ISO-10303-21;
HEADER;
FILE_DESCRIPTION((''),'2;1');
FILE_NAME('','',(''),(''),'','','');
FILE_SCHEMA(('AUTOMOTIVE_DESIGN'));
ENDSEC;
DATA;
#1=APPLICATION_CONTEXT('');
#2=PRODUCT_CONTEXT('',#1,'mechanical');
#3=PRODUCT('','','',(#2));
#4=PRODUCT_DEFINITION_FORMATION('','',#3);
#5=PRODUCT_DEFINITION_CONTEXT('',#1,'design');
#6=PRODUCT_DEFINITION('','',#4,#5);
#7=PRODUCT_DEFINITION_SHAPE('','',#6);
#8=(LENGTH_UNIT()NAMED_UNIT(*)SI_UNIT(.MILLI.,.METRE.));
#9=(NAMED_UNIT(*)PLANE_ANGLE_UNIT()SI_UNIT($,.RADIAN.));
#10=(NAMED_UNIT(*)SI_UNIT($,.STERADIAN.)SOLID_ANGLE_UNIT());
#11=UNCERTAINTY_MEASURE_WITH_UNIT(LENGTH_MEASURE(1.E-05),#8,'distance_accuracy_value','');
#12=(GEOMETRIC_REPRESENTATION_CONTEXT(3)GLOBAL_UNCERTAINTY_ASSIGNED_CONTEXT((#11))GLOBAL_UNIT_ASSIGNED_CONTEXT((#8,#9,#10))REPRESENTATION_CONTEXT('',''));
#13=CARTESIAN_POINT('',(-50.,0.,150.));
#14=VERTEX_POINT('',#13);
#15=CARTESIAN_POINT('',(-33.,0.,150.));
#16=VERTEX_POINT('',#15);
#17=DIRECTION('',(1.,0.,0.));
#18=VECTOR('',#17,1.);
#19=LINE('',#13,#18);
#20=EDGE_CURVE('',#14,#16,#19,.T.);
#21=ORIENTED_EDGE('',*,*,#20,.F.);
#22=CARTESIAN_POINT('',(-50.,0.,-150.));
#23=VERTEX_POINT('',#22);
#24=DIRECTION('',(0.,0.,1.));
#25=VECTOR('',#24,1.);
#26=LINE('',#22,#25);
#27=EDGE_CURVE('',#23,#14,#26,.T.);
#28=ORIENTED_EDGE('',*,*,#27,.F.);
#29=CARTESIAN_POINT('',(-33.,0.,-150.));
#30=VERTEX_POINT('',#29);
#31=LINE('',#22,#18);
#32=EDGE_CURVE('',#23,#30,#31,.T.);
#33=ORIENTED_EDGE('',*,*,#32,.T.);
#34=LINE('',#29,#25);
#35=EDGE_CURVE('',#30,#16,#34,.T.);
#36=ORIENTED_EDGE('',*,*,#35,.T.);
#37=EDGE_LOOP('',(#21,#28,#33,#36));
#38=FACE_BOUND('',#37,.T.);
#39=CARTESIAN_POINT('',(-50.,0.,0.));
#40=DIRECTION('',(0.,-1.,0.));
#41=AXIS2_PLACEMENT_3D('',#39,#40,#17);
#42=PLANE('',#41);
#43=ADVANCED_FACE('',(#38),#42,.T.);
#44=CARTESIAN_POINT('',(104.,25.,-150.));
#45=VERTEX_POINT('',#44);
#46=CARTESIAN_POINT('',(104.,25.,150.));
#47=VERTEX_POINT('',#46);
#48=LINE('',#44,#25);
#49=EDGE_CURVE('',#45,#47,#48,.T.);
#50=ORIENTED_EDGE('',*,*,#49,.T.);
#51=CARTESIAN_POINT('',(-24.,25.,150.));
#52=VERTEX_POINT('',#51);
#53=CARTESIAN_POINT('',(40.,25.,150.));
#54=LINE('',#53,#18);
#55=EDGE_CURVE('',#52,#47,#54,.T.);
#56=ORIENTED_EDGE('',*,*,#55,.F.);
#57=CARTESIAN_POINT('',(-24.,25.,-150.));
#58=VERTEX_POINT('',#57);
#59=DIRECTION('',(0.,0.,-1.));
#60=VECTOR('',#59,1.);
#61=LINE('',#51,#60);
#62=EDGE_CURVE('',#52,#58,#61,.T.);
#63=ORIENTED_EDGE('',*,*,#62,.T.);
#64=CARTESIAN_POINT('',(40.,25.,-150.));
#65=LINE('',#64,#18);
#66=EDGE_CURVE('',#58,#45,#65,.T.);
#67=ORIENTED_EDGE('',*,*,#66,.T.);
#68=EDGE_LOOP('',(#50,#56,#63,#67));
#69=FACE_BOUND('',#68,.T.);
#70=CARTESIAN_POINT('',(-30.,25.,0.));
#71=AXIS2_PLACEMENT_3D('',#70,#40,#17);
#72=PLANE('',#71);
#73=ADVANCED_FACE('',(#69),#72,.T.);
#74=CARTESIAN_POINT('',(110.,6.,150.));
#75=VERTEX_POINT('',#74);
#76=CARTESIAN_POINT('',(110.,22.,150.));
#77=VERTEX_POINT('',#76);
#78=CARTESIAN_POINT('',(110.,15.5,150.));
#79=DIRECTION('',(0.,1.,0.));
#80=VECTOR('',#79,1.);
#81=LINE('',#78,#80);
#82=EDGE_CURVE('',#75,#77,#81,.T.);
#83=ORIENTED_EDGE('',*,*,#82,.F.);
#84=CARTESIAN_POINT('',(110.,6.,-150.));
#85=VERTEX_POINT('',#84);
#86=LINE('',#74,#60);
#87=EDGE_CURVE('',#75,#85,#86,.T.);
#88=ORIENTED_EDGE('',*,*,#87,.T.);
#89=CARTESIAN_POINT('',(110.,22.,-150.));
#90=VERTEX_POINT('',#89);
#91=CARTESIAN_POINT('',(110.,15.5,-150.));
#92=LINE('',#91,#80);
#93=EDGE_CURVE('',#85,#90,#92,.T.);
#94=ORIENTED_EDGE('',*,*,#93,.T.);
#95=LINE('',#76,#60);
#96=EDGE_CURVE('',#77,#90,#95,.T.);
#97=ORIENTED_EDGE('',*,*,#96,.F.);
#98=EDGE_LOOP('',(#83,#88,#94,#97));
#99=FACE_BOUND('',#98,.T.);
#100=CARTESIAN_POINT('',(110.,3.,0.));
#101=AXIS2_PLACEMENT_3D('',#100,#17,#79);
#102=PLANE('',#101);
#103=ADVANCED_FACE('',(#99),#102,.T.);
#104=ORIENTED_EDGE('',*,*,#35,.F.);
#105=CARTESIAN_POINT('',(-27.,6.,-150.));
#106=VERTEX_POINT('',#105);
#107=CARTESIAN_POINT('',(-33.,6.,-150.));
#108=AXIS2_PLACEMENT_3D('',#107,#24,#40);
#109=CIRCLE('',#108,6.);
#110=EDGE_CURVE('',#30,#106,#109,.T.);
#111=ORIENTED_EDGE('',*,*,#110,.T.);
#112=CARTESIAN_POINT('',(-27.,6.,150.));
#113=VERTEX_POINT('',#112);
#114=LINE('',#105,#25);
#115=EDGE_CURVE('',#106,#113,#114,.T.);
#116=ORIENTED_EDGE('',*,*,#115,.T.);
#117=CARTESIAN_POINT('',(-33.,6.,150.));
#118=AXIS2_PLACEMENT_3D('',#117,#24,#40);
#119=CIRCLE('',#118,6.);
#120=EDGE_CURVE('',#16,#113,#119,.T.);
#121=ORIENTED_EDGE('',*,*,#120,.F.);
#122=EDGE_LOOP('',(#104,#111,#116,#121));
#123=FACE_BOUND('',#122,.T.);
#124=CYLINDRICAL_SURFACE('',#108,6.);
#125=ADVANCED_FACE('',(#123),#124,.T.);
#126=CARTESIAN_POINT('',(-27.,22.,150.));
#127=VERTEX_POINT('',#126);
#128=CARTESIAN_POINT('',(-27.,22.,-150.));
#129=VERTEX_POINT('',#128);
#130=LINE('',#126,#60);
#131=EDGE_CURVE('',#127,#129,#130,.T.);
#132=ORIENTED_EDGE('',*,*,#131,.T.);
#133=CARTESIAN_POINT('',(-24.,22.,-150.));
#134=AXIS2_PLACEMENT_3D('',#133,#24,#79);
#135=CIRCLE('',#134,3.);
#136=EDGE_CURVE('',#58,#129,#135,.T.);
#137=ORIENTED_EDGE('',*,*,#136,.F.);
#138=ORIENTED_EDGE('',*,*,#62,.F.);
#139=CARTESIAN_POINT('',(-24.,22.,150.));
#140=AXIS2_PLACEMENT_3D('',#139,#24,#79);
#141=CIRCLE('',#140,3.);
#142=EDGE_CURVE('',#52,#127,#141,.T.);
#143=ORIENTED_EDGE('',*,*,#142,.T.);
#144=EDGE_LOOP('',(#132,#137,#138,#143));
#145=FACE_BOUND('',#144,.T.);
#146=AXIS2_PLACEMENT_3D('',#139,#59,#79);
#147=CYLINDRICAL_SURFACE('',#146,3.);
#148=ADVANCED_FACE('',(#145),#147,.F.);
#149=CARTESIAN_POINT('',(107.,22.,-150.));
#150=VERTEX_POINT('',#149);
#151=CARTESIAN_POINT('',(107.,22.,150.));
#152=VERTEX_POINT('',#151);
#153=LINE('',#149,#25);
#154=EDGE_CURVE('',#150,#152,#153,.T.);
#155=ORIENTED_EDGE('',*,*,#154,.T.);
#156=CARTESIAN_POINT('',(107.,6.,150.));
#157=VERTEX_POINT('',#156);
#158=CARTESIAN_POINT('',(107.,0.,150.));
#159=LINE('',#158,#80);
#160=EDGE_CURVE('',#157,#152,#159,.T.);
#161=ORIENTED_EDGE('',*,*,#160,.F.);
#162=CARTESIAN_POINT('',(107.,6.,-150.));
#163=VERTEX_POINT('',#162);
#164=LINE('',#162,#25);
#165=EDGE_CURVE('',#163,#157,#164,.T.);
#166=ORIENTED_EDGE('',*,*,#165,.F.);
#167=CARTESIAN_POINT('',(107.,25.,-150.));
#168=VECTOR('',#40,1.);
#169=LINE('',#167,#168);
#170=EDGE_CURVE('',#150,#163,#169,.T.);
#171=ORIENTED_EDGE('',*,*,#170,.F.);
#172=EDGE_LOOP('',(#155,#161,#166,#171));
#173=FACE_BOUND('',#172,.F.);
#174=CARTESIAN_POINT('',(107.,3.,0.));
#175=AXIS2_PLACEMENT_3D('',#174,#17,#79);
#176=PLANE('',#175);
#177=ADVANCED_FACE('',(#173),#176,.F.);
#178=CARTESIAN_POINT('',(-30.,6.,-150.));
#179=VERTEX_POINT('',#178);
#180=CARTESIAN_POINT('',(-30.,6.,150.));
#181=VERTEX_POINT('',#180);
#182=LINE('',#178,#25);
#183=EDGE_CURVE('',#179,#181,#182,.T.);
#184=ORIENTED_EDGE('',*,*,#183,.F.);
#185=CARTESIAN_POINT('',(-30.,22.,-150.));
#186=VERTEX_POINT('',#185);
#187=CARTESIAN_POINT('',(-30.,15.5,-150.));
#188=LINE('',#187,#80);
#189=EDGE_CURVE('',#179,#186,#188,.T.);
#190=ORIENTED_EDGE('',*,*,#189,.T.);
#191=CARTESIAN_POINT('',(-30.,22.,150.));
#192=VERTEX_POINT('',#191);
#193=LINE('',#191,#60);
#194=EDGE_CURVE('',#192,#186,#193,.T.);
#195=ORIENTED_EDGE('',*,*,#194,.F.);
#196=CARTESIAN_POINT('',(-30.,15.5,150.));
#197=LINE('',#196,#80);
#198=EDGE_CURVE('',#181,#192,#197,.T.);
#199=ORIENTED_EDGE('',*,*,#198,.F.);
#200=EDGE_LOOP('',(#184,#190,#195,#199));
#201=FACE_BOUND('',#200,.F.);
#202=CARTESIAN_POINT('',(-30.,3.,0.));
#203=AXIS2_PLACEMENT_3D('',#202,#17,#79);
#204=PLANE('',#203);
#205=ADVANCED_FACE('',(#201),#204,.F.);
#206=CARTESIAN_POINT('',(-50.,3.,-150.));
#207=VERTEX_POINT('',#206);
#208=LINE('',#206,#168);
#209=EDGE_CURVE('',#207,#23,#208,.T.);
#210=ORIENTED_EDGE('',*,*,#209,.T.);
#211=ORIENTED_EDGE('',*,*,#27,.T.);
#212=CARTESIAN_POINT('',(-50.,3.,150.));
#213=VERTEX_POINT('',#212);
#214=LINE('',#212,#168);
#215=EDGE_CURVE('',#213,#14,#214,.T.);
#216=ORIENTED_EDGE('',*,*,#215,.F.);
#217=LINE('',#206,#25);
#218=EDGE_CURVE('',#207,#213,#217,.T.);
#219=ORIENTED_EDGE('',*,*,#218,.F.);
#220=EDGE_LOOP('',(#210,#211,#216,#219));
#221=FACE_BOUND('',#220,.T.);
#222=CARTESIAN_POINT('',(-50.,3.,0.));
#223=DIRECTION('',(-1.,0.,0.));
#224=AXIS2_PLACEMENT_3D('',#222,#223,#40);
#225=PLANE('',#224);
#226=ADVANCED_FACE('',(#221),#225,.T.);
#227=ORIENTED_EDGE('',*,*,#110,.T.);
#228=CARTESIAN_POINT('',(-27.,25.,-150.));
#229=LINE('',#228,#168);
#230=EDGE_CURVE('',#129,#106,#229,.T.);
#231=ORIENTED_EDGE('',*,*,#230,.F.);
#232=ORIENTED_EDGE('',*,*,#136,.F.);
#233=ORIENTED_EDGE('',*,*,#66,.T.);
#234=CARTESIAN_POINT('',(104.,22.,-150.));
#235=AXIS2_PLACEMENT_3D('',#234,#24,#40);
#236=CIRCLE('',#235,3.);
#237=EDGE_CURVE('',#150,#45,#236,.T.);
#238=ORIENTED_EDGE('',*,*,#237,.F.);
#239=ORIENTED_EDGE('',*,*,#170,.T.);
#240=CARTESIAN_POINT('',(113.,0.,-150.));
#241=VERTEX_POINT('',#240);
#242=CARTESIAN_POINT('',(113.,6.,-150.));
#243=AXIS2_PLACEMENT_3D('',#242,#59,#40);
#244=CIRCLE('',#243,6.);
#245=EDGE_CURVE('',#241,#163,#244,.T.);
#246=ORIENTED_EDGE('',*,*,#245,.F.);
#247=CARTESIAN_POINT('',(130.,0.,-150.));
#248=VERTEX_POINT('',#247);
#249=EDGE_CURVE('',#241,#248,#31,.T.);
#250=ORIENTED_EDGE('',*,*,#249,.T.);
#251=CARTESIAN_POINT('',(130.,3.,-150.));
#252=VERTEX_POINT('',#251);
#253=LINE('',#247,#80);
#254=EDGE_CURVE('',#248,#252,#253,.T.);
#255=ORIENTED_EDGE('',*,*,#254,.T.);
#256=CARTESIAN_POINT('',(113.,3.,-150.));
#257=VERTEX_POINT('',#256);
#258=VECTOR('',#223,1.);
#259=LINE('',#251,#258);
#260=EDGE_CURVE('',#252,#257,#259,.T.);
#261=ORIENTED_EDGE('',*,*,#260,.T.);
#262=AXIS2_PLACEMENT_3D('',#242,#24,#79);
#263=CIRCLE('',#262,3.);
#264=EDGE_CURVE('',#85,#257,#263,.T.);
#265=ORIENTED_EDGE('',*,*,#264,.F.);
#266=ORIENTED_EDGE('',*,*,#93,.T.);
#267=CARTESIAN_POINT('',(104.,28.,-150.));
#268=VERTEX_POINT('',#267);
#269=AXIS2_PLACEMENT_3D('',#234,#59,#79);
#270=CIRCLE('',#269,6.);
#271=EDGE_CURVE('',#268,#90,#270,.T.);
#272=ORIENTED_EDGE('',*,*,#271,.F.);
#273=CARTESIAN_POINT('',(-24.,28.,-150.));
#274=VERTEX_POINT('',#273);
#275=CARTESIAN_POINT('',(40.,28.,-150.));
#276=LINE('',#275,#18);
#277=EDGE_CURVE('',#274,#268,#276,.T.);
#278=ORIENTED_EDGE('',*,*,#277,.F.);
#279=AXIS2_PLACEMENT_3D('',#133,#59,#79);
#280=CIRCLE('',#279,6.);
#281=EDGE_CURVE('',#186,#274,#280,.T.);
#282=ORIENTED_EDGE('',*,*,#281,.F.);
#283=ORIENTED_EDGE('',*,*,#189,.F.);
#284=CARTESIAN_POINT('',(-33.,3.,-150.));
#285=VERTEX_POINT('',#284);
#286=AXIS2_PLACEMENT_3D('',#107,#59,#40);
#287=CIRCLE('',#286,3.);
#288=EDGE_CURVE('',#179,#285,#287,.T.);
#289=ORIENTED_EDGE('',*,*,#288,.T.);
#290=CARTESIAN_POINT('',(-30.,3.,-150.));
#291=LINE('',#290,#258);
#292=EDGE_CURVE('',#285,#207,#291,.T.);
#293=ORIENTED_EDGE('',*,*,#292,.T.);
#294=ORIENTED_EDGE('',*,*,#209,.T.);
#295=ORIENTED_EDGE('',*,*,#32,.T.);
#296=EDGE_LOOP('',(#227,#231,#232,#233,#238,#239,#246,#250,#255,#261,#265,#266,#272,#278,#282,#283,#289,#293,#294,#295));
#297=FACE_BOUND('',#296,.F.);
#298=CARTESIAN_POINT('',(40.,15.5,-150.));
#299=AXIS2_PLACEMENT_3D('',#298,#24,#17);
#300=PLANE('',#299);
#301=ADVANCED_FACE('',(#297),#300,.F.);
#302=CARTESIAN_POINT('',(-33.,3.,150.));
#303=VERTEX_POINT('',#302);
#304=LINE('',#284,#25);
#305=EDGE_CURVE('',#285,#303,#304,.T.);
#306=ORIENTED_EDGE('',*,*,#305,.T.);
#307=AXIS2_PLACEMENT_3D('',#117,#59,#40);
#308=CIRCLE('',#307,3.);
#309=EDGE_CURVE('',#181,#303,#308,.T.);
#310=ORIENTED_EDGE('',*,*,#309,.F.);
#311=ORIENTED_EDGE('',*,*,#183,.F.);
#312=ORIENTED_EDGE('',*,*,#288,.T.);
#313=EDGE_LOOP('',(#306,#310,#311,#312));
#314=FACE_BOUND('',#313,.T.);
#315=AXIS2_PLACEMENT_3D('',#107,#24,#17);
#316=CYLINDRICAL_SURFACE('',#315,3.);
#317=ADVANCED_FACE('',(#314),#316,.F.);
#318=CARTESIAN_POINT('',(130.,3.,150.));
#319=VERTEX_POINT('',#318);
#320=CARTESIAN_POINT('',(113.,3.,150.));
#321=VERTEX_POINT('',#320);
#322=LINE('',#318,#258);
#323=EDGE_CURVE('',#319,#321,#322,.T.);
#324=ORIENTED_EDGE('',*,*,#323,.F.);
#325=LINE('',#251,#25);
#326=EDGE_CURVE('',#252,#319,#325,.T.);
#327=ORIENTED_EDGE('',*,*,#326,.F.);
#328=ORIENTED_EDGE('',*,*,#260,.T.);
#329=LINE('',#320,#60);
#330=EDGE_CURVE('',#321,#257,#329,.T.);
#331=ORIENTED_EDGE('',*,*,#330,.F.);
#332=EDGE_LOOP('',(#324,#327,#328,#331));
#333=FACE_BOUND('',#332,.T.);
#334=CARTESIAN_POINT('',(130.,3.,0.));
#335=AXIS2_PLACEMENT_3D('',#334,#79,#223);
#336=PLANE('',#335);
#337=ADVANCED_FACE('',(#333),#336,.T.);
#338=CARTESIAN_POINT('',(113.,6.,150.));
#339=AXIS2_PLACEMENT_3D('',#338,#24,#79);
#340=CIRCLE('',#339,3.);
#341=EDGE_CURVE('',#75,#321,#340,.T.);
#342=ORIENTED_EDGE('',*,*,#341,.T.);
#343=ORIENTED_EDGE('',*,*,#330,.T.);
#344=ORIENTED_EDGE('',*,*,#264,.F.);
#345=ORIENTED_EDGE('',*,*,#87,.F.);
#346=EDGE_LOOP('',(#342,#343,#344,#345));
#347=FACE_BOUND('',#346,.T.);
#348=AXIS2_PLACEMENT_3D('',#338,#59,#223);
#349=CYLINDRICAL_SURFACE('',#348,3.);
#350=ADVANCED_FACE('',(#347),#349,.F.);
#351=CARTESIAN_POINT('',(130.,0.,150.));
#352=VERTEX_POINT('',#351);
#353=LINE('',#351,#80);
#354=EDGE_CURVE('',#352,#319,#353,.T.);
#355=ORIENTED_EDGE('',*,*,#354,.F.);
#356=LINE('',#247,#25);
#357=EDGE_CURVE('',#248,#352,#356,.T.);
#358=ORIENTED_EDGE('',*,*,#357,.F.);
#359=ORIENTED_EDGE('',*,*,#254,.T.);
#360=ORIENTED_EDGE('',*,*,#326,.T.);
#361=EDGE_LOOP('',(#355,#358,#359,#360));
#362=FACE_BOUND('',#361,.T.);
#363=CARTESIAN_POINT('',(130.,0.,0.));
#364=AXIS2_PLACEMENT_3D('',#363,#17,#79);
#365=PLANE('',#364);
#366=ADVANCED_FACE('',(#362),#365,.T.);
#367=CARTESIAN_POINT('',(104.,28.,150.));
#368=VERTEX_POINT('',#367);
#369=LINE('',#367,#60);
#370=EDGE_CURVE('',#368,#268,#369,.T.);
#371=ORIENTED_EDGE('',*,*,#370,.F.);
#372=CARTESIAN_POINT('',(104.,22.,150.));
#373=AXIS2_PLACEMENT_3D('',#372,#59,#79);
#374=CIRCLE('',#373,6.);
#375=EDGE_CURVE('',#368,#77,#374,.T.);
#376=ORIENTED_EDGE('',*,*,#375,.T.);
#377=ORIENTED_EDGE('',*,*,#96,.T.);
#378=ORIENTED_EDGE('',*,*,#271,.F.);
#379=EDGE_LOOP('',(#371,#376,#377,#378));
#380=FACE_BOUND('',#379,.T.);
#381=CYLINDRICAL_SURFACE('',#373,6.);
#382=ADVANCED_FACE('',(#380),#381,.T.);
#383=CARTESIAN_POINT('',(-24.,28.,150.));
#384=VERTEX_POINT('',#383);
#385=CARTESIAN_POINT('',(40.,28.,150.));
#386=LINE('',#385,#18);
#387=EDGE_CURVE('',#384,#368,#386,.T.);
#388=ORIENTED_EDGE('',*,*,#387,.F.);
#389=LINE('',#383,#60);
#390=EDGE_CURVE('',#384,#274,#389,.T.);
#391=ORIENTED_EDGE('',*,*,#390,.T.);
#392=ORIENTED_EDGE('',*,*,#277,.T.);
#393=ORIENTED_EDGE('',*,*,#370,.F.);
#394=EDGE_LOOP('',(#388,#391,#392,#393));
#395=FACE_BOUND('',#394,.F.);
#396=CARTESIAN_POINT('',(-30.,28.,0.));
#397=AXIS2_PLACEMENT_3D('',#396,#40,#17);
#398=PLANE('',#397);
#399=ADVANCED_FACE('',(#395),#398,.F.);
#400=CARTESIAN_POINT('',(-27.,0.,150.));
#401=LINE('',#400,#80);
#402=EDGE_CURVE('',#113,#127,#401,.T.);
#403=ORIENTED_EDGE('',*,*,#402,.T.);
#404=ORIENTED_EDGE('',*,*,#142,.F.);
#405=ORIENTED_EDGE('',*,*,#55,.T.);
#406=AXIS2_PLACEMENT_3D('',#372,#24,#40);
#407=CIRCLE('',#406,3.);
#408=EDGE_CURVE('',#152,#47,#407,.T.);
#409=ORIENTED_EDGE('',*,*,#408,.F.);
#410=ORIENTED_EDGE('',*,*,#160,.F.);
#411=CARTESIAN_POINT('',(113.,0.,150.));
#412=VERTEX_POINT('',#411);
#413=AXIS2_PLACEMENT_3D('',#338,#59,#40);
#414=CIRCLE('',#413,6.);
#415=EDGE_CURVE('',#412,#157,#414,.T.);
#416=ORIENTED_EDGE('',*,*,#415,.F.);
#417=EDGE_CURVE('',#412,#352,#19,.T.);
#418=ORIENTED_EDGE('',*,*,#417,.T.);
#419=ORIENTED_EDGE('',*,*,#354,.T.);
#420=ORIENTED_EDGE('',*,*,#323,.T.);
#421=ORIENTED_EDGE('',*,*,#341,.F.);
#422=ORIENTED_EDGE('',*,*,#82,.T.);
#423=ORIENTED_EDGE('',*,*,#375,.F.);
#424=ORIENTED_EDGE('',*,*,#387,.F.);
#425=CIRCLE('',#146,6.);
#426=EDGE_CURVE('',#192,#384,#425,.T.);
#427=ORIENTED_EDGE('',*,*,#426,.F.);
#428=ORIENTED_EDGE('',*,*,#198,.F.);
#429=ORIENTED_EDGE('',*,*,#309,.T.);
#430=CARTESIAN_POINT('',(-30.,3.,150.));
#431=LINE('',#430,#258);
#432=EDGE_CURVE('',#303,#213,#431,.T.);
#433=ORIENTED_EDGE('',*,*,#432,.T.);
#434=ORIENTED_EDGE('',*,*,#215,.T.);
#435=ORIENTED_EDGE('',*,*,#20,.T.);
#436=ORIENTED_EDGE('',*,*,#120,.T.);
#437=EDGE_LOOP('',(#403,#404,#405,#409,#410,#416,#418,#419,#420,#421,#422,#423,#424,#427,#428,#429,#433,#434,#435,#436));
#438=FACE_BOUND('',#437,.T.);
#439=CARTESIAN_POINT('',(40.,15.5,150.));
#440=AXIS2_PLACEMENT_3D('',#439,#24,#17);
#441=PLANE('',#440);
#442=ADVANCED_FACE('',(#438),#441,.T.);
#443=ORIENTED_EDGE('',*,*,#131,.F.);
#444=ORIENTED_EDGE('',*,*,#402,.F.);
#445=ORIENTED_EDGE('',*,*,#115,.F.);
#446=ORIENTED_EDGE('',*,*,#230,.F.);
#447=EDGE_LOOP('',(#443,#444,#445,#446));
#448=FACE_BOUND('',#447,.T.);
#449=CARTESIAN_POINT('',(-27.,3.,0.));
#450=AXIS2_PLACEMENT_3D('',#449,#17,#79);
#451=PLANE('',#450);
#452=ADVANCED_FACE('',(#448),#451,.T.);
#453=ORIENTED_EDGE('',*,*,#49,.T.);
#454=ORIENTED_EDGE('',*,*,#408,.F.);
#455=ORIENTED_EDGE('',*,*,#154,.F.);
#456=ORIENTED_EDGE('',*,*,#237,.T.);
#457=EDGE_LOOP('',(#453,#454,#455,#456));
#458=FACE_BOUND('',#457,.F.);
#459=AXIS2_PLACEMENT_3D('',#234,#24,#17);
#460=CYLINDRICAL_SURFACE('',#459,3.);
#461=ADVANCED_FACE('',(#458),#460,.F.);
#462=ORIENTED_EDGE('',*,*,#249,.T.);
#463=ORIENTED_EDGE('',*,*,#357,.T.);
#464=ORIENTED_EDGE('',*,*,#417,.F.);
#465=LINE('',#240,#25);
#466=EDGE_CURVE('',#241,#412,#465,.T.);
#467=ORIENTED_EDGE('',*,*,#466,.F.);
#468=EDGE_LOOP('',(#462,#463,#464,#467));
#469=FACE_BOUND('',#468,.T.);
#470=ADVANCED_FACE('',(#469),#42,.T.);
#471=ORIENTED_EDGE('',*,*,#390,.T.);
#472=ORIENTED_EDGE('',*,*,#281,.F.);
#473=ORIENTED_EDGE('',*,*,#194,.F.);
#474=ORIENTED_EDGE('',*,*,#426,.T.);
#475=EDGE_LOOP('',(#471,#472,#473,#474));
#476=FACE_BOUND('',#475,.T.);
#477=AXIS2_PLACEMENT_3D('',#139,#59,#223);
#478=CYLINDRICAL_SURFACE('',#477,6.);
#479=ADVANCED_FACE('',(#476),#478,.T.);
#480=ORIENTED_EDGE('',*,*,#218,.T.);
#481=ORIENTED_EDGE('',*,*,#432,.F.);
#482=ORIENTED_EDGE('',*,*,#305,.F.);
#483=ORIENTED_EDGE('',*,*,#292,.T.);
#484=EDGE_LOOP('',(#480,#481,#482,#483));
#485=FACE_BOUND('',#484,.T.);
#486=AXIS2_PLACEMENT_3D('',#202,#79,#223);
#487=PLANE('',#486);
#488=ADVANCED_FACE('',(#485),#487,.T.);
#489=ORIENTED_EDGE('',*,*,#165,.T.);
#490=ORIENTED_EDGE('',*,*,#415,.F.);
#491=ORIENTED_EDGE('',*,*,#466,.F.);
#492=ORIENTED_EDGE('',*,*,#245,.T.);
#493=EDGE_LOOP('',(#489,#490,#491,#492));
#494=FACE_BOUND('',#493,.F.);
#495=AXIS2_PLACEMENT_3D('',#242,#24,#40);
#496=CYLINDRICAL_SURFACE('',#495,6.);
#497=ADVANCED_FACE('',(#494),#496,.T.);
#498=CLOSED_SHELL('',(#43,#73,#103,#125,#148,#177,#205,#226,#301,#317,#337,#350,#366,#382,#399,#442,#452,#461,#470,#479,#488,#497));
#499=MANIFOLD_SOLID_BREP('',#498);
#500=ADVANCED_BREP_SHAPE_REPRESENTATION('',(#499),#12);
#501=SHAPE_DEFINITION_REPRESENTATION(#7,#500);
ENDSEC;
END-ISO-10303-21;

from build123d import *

# Parameters (mm, degrees)
F0_W        = 140
F0_H        = 25
F1_DEPTH    = 150
F2_T        = 3
F2_T3_DEPTH = 306
F3_R        = 3
F4_R        = 6


# Not quite as in the source:
# - a shell that OpenCascade refuses in one call is made with other operations: the cavity is built on its own and cut out


with BuildPart() as f1:
    # F0 (on Top) → F1 (new body, symmetric)
    with BuildSketch(Plane.XY):
        with Locations((40, 15.5)):
            Rectangle(F0_W, F0_H)
        Polygon((110, 3), (-30, 3), (-50, 3), (-50, 0), (130, 0), (130, 3), align=None)
    extrude(amount=F1_DEPTH, both=True)

    # F2: shell of thickness 3, made by hand


with BuildPart() as f2_core1:
    # F2_t2: copy of F1
    add(f1.part)

    # the walls: a layer under each face that stays
    f2_faces = [f2_core1.faces().sort_by_distance(p)[0] for p in [
        (-30, 15.5, 0),
        (40, 28, 0),
        (110, 15.5, 0),
        (120, 3, 0),
        (130, 1.5, 0),
        (-50, 1.5, 0),
        (-40, 3, 0),
    ]]
    thicken(f2_faces, amount=-F2_T, mode=Mode.SUBTRACT)

    # F2_s4 → F2_t3 (cut)
    with BuildSketch(Plane.XY.offset(-153)):
        Polygon((-30.03, 3.03), (-27, 3), (-27, 0), (-30, 0), align=None)
        Polygon((110.03, 3.03), (107, 3), (107, 0), (110, 0), align=None)
    extrude(amount=F2_T3_DEPTH, mode=Mode.SUBTRACT)


with BuildPart() as f1_1:
    add(f1.part)

    # what is left inside the walls is the cavity
    f2_cavity = [f2_core1.part.solids().sort_by_distance(p)[0] for p in [
        (40, 0.03, -50),
    ]]
    add(f2_cavity, mode=Mode.SUBTRACT)

    # F3
    f3_edges = [f1_1.edges().sort_by_distance(p)[0] for p in [
        (-30, 3, 0),
        (110, 3, 0),
        (-27, 25, 0),
        (107, 25, 0),
    ]]
    fillet(f3_edges, radius=F3_R)

    # F4
    f4_edges = [f1_1.edges().sort_by_distance(p)[0] for p in [
        (-27, 0, 0),
        (107, 0, 0),
        (-30, 28, 0),
        (110, 28, 0),
    ]]
    fillet(f4_edges, radius=F4_R)


solid = f1_1.part
